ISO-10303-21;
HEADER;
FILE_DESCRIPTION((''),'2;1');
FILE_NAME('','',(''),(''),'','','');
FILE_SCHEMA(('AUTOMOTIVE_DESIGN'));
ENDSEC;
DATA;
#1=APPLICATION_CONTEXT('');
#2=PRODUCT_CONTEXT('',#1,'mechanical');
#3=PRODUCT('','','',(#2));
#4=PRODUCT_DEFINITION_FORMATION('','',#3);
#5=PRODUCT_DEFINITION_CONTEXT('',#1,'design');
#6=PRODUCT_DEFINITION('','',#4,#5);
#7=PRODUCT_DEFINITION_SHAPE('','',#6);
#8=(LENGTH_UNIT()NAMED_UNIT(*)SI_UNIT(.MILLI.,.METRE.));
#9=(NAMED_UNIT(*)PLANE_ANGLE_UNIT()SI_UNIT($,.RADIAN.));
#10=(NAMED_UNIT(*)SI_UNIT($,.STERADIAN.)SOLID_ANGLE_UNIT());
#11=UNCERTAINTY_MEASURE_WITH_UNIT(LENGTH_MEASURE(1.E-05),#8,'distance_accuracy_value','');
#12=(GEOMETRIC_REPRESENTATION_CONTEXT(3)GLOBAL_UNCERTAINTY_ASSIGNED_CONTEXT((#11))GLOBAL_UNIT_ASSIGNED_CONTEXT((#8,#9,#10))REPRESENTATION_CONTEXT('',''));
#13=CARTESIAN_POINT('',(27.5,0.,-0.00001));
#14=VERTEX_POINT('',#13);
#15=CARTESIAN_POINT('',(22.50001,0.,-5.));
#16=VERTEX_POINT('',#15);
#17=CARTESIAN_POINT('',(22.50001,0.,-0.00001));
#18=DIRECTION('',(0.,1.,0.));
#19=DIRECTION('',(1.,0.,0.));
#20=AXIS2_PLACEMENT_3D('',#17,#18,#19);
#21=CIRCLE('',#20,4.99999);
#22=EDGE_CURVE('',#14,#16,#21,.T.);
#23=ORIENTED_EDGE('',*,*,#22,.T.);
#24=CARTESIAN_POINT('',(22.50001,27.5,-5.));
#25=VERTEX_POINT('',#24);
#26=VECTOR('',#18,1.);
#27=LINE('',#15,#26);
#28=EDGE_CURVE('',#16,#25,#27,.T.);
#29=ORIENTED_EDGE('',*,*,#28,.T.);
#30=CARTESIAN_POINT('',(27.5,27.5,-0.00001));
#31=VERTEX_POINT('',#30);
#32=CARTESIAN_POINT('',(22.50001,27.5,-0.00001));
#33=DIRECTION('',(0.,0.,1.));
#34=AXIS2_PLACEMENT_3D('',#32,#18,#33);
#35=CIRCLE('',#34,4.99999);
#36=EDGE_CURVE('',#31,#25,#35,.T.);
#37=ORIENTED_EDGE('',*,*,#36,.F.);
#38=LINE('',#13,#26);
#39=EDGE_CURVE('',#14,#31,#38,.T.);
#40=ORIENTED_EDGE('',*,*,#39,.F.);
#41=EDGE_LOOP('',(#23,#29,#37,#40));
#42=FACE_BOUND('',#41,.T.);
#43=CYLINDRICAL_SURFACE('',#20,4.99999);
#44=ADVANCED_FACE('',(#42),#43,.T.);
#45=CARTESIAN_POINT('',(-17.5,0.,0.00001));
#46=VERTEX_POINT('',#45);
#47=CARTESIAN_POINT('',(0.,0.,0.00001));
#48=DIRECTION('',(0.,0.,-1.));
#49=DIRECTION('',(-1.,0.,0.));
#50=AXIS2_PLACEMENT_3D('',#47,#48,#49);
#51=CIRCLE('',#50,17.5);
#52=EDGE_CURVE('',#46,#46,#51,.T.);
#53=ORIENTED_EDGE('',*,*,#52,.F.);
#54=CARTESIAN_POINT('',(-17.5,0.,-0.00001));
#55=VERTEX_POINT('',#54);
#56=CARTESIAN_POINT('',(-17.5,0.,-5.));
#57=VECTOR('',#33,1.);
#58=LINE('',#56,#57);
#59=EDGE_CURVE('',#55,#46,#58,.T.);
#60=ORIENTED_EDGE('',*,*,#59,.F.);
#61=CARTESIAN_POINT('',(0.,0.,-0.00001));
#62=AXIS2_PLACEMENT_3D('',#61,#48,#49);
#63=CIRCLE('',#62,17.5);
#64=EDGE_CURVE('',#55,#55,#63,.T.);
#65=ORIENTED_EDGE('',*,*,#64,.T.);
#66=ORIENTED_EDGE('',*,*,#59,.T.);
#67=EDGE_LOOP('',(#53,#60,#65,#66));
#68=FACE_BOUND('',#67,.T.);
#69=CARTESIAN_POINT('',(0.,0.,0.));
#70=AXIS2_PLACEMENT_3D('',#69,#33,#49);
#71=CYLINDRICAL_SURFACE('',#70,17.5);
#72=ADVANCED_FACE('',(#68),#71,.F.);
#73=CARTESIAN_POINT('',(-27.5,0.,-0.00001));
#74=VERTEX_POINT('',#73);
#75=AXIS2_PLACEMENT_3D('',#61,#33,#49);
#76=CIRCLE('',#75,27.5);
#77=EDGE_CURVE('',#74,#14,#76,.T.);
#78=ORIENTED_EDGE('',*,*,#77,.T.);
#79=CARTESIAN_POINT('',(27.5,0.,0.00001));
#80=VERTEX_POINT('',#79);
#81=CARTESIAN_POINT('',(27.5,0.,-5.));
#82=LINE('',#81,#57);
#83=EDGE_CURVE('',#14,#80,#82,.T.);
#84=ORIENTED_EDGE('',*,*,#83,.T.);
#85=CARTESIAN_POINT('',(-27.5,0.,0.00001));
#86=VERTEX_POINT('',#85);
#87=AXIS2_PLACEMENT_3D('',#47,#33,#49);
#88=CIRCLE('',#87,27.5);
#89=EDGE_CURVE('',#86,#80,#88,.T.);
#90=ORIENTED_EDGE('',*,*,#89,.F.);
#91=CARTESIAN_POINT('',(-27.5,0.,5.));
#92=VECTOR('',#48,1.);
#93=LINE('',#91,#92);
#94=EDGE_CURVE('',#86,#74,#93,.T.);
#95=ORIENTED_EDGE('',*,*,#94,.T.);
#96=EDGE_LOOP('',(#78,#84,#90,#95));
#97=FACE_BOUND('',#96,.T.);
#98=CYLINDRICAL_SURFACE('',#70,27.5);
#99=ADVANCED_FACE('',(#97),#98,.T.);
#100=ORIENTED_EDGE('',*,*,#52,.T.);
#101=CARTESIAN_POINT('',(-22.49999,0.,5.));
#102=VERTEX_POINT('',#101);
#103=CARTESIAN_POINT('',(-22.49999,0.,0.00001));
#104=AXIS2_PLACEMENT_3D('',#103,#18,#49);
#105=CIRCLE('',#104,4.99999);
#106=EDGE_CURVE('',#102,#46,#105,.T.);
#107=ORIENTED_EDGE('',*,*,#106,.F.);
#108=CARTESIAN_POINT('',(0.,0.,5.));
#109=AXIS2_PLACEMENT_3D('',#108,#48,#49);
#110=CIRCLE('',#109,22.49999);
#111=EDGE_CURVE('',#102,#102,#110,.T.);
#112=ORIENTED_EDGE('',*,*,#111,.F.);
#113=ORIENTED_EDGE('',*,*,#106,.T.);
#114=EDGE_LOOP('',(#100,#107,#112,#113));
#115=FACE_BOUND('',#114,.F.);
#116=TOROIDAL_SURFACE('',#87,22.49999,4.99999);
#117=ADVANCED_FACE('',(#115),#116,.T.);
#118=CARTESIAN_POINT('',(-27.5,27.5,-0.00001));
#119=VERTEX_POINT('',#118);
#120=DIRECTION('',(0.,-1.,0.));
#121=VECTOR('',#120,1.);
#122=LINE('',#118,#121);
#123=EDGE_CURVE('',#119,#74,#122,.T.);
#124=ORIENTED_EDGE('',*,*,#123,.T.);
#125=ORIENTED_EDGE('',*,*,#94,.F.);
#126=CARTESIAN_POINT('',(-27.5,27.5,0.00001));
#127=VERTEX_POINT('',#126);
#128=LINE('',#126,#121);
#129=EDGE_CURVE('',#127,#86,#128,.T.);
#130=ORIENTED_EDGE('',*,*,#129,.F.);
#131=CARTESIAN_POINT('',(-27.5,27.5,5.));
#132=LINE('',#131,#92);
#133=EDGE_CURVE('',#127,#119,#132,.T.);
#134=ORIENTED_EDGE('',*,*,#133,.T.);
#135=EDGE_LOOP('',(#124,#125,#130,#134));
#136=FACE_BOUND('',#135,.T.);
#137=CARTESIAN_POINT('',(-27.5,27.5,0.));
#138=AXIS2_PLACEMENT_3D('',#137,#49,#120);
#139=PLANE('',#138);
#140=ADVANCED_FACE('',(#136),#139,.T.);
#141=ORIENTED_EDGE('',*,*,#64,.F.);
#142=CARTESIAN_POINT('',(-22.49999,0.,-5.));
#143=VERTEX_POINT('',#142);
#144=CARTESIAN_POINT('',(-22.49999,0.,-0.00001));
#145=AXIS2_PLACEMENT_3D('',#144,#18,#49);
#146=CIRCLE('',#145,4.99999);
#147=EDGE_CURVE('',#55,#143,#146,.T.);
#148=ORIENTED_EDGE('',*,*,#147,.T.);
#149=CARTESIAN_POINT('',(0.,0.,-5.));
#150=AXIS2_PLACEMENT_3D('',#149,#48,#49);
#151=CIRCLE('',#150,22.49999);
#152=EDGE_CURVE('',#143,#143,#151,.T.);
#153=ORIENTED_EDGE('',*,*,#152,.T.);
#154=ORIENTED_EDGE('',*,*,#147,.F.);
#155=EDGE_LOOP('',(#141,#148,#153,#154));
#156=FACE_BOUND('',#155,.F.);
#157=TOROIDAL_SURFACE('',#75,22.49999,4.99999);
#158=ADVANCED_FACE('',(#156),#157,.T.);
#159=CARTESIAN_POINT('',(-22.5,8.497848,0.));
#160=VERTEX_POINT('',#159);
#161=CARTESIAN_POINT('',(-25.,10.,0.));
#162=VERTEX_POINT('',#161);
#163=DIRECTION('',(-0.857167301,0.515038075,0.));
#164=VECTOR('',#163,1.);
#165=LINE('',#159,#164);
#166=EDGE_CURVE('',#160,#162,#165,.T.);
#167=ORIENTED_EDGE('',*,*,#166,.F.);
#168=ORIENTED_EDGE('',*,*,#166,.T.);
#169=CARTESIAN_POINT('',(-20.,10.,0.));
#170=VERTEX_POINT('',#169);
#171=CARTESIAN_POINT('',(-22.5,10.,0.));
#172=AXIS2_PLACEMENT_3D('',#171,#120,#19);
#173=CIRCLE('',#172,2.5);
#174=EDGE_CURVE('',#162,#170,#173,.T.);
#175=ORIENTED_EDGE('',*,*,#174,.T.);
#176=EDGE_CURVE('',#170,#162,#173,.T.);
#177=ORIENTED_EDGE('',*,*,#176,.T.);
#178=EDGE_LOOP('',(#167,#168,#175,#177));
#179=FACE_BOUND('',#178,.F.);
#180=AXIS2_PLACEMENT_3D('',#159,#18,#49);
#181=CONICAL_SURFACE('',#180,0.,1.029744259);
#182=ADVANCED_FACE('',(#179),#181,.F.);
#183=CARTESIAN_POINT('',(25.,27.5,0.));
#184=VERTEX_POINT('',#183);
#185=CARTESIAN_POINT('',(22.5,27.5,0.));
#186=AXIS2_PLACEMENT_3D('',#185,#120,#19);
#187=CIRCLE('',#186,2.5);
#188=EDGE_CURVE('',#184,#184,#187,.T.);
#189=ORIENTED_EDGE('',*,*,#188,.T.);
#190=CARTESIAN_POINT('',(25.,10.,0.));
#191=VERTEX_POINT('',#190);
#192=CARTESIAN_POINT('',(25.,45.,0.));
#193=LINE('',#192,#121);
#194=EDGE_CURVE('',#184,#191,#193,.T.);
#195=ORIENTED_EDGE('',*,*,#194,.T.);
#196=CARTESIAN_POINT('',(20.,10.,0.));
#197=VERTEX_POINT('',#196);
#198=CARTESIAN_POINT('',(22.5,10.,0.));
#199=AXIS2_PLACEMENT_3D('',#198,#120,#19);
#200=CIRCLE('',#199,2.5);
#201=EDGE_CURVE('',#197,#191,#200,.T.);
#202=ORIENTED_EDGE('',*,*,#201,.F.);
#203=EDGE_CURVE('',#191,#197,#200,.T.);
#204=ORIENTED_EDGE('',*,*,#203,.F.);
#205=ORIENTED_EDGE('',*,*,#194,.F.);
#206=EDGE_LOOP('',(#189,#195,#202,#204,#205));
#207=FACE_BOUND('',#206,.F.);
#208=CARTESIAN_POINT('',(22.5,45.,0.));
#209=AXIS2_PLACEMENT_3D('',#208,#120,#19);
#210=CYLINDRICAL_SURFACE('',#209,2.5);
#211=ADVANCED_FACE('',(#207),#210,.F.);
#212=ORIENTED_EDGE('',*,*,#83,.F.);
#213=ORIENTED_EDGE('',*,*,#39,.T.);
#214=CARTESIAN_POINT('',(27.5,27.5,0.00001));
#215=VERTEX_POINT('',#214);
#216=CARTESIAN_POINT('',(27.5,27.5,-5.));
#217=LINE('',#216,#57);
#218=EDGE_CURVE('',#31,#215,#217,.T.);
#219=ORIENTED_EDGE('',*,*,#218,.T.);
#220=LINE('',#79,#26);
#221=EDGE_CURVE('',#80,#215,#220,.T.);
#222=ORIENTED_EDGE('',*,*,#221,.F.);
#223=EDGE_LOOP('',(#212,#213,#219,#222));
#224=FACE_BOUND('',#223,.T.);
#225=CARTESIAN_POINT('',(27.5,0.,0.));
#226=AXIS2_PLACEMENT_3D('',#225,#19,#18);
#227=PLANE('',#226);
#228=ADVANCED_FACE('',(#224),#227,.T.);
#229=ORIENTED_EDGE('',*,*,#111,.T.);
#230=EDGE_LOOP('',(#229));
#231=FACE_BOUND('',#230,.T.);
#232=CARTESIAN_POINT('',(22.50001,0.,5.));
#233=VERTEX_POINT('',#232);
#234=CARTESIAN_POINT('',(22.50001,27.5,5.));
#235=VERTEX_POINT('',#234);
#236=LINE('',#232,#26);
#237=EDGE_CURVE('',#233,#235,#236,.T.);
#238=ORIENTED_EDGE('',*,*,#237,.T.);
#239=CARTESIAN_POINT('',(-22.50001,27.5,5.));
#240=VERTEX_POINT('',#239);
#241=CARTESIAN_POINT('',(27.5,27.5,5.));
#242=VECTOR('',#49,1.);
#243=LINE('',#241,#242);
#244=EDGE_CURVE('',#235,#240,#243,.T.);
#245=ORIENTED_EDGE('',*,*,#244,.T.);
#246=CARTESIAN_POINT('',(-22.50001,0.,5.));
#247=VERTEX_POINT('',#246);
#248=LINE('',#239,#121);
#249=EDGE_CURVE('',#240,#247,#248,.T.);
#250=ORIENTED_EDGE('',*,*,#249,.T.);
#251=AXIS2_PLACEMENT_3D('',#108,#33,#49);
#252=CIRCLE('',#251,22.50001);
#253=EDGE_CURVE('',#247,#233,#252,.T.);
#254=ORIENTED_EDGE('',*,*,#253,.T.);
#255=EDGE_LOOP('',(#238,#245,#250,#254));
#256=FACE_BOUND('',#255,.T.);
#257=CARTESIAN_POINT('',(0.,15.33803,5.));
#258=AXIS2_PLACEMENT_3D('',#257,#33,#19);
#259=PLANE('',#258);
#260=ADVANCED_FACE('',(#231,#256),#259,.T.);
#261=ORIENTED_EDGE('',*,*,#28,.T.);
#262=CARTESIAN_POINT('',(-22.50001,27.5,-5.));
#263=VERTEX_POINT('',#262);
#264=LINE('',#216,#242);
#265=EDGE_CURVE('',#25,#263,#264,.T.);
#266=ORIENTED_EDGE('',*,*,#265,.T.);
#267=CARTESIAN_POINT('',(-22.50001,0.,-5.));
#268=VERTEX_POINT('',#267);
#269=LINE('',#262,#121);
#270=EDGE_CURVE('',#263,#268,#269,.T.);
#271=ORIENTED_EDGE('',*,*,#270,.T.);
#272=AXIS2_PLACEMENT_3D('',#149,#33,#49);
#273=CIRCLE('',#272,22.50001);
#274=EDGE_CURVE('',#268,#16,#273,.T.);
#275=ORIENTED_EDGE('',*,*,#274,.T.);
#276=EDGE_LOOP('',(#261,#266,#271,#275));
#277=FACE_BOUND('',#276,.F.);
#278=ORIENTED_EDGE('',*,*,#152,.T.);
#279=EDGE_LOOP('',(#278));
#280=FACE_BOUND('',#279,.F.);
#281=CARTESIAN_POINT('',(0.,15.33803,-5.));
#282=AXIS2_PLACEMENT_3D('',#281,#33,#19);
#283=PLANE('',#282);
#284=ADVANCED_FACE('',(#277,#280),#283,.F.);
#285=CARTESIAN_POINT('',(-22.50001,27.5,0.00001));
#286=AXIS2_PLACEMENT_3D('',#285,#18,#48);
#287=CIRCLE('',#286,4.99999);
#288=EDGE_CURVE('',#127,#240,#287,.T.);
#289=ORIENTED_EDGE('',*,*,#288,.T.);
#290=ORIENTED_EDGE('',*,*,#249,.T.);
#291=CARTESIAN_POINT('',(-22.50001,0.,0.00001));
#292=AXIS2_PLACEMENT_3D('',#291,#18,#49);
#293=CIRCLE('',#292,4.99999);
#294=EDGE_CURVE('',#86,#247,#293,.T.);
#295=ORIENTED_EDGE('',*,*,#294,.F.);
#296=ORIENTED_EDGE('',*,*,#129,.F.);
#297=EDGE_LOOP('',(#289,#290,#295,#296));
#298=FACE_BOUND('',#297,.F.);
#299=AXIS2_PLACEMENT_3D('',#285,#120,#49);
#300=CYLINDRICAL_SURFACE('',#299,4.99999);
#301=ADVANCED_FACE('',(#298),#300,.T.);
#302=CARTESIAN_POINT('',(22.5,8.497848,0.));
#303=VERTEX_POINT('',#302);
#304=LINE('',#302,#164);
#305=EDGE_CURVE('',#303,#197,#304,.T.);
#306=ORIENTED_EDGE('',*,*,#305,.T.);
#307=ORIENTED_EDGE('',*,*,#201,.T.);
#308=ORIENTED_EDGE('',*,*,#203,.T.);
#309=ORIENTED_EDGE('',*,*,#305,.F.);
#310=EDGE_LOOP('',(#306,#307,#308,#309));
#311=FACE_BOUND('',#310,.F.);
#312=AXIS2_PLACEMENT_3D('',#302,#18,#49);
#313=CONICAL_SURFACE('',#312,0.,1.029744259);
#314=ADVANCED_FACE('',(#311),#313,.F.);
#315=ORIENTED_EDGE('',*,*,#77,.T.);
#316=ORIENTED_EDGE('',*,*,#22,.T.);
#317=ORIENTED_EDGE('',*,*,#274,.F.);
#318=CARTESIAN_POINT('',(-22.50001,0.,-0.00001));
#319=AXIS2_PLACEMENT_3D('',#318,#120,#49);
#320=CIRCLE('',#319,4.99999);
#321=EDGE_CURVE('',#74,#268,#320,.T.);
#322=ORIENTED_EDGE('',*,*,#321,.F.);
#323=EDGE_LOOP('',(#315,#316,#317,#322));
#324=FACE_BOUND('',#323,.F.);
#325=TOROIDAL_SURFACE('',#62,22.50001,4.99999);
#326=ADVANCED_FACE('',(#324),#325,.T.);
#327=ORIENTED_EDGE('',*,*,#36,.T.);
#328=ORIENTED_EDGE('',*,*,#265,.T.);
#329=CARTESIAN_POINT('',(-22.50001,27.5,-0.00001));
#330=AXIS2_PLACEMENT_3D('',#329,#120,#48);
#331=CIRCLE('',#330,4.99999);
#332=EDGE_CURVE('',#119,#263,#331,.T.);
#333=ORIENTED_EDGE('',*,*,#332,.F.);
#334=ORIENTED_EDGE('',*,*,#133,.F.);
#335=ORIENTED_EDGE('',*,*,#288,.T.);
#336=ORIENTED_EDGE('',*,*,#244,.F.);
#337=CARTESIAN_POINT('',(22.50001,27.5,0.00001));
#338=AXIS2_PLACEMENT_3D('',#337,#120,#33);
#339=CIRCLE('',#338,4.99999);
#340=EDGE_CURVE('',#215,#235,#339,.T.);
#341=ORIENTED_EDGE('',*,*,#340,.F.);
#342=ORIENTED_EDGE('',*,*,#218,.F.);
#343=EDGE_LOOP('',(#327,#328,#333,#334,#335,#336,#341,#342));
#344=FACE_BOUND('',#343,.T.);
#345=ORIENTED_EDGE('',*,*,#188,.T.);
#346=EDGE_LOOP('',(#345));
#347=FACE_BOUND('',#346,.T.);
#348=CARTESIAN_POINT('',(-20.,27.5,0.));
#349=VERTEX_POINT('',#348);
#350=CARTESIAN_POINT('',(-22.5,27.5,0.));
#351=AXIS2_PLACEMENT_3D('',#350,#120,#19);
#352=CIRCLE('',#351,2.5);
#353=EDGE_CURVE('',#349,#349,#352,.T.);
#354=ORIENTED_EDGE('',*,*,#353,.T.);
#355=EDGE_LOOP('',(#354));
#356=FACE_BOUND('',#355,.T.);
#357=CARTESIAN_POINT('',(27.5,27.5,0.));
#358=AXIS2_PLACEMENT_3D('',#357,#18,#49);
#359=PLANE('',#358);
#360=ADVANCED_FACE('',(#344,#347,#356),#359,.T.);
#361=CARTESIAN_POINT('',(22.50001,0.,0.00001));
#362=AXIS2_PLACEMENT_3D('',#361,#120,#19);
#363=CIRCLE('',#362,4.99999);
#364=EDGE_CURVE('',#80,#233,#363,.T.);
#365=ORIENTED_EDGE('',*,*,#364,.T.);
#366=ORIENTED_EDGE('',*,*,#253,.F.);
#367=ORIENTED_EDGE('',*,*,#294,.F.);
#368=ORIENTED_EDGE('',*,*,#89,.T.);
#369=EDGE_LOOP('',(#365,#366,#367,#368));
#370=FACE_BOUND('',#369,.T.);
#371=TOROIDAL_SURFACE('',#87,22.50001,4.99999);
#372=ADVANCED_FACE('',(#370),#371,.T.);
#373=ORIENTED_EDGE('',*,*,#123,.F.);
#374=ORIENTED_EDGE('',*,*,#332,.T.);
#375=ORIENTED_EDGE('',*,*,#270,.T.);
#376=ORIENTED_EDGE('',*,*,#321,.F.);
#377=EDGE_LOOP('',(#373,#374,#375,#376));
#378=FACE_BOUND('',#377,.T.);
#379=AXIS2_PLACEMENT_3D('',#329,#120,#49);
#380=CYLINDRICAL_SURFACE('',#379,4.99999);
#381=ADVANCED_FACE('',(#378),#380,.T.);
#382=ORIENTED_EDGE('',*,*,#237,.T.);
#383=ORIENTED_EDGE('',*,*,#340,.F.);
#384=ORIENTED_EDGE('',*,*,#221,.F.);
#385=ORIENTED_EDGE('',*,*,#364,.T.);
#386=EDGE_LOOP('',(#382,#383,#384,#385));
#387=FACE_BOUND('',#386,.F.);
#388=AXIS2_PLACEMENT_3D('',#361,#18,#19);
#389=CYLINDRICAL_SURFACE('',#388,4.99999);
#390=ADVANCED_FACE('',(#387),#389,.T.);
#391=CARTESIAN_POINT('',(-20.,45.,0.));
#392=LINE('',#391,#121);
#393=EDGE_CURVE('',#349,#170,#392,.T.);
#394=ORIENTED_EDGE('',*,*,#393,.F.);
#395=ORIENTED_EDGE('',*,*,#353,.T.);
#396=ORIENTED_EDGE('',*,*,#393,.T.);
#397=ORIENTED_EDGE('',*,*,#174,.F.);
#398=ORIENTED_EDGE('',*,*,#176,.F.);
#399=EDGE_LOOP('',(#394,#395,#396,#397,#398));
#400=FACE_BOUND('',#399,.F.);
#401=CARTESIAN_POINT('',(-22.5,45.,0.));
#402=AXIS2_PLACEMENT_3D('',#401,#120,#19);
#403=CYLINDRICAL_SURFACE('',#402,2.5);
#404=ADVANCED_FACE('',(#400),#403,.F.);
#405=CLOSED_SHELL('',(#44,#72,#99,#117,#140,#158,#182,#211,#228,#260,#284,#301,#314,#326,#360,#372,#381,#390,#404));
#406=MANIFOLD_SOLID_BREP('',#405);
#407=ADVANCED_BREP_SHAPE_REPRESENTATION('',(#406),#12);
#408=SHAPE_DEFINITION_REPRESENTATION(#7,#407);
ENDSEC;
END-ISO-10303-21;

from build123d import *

# Parameters (mm, degrees)
F2_DEPTH = 5
F3_R     = 4.99999
F5_D     = 5
F5_DEPTH = 17.5
F5_TIP   = 1.5021515476
F6_D     = 5
F6_DEPTH = 17.5
F6_TIP   = 1.5021515476


# Not quite as in the source:
# - a fillet or chamfer is up to 0.001 mm smaller than in the source, because OpenCascade refuses the exact size


with BuildPart() as f2:
    # F1 (on Top) → F2 (new body, symmetric)
    with BuildSketch(Plane.XY):
        with BuildLine():
            Line((27.5, 0), (17.5, 0))
            ThreePointArc((17.5, 0), (0, -17.5), (-17.5, 0))
            Line((-17.5, 0), (-27.5, 0))
            ThreePointArc((-27.5, 0), (0, -27.5), (27.5, 0))
        make_face()
        with BuildLine():
            ThreePointArc((-17.5, 0), (0, 17.5), (17.5, 0))
            Line((17.5, 0), (27.5, 0))
            Line((27.5, 0), (27.5, 27.5))
            Line((27.5, 27.5), (0, 27.5))
            Line((0, 27.5), (-27.5, 27.5))
            Line((-27.5, 27.5), (-27.5, 0))
            Line((-27.5, 0), (-17.5, 0))
        make_face()
    extrude(amount=F2_DEPTH, both=True)

    # F3 (radius 5 in the source; OpenCascade refuses exactly that, so slightly less here)
    f3_edges = [f2.edges().sort_by_distance(p)[0] for p in [
        (17.5, 0, -5),
        (0, -27.5, -5),
        (0, -27.5, 5),
        (17.5, 0, 5),
    ]]
    fillet(f3_edges, radius=F3_R)

    # F5
    with Locations(Plane(origin=(0, 27.5, 0), x_dir=(-1, 0, 0), z_dir=(0, 1, 0))):
        with Locations((-22.5, 0)):
            Hole(F5_D / 2, depth=F5_DEPTH)
            with Locations((0, 0, -(F5_DEPTH + F5_TIP / 2))):  # 118° drill point
                Cone(0, F5_D / 2, F5_TIP, mode=Mode.SUBTRACT)

    # F6
    with Locations(Plane(origin=(0, 27.5, 0), x_dir=(-1, 0, 0), z_dir=(0, 1, 0))):
        with Locations((22.5, 0)):
            Hole(F6_D / 2, depth=F6_DEPTH)
            with Locations((0, 0, -(F6_DEPTH + F6_TIP / 2))):  # 118° drill point
                Cone(0, F6_D / 2, F6_TIP, mode=Mode.SUBTRACT)


solid = f2.part
